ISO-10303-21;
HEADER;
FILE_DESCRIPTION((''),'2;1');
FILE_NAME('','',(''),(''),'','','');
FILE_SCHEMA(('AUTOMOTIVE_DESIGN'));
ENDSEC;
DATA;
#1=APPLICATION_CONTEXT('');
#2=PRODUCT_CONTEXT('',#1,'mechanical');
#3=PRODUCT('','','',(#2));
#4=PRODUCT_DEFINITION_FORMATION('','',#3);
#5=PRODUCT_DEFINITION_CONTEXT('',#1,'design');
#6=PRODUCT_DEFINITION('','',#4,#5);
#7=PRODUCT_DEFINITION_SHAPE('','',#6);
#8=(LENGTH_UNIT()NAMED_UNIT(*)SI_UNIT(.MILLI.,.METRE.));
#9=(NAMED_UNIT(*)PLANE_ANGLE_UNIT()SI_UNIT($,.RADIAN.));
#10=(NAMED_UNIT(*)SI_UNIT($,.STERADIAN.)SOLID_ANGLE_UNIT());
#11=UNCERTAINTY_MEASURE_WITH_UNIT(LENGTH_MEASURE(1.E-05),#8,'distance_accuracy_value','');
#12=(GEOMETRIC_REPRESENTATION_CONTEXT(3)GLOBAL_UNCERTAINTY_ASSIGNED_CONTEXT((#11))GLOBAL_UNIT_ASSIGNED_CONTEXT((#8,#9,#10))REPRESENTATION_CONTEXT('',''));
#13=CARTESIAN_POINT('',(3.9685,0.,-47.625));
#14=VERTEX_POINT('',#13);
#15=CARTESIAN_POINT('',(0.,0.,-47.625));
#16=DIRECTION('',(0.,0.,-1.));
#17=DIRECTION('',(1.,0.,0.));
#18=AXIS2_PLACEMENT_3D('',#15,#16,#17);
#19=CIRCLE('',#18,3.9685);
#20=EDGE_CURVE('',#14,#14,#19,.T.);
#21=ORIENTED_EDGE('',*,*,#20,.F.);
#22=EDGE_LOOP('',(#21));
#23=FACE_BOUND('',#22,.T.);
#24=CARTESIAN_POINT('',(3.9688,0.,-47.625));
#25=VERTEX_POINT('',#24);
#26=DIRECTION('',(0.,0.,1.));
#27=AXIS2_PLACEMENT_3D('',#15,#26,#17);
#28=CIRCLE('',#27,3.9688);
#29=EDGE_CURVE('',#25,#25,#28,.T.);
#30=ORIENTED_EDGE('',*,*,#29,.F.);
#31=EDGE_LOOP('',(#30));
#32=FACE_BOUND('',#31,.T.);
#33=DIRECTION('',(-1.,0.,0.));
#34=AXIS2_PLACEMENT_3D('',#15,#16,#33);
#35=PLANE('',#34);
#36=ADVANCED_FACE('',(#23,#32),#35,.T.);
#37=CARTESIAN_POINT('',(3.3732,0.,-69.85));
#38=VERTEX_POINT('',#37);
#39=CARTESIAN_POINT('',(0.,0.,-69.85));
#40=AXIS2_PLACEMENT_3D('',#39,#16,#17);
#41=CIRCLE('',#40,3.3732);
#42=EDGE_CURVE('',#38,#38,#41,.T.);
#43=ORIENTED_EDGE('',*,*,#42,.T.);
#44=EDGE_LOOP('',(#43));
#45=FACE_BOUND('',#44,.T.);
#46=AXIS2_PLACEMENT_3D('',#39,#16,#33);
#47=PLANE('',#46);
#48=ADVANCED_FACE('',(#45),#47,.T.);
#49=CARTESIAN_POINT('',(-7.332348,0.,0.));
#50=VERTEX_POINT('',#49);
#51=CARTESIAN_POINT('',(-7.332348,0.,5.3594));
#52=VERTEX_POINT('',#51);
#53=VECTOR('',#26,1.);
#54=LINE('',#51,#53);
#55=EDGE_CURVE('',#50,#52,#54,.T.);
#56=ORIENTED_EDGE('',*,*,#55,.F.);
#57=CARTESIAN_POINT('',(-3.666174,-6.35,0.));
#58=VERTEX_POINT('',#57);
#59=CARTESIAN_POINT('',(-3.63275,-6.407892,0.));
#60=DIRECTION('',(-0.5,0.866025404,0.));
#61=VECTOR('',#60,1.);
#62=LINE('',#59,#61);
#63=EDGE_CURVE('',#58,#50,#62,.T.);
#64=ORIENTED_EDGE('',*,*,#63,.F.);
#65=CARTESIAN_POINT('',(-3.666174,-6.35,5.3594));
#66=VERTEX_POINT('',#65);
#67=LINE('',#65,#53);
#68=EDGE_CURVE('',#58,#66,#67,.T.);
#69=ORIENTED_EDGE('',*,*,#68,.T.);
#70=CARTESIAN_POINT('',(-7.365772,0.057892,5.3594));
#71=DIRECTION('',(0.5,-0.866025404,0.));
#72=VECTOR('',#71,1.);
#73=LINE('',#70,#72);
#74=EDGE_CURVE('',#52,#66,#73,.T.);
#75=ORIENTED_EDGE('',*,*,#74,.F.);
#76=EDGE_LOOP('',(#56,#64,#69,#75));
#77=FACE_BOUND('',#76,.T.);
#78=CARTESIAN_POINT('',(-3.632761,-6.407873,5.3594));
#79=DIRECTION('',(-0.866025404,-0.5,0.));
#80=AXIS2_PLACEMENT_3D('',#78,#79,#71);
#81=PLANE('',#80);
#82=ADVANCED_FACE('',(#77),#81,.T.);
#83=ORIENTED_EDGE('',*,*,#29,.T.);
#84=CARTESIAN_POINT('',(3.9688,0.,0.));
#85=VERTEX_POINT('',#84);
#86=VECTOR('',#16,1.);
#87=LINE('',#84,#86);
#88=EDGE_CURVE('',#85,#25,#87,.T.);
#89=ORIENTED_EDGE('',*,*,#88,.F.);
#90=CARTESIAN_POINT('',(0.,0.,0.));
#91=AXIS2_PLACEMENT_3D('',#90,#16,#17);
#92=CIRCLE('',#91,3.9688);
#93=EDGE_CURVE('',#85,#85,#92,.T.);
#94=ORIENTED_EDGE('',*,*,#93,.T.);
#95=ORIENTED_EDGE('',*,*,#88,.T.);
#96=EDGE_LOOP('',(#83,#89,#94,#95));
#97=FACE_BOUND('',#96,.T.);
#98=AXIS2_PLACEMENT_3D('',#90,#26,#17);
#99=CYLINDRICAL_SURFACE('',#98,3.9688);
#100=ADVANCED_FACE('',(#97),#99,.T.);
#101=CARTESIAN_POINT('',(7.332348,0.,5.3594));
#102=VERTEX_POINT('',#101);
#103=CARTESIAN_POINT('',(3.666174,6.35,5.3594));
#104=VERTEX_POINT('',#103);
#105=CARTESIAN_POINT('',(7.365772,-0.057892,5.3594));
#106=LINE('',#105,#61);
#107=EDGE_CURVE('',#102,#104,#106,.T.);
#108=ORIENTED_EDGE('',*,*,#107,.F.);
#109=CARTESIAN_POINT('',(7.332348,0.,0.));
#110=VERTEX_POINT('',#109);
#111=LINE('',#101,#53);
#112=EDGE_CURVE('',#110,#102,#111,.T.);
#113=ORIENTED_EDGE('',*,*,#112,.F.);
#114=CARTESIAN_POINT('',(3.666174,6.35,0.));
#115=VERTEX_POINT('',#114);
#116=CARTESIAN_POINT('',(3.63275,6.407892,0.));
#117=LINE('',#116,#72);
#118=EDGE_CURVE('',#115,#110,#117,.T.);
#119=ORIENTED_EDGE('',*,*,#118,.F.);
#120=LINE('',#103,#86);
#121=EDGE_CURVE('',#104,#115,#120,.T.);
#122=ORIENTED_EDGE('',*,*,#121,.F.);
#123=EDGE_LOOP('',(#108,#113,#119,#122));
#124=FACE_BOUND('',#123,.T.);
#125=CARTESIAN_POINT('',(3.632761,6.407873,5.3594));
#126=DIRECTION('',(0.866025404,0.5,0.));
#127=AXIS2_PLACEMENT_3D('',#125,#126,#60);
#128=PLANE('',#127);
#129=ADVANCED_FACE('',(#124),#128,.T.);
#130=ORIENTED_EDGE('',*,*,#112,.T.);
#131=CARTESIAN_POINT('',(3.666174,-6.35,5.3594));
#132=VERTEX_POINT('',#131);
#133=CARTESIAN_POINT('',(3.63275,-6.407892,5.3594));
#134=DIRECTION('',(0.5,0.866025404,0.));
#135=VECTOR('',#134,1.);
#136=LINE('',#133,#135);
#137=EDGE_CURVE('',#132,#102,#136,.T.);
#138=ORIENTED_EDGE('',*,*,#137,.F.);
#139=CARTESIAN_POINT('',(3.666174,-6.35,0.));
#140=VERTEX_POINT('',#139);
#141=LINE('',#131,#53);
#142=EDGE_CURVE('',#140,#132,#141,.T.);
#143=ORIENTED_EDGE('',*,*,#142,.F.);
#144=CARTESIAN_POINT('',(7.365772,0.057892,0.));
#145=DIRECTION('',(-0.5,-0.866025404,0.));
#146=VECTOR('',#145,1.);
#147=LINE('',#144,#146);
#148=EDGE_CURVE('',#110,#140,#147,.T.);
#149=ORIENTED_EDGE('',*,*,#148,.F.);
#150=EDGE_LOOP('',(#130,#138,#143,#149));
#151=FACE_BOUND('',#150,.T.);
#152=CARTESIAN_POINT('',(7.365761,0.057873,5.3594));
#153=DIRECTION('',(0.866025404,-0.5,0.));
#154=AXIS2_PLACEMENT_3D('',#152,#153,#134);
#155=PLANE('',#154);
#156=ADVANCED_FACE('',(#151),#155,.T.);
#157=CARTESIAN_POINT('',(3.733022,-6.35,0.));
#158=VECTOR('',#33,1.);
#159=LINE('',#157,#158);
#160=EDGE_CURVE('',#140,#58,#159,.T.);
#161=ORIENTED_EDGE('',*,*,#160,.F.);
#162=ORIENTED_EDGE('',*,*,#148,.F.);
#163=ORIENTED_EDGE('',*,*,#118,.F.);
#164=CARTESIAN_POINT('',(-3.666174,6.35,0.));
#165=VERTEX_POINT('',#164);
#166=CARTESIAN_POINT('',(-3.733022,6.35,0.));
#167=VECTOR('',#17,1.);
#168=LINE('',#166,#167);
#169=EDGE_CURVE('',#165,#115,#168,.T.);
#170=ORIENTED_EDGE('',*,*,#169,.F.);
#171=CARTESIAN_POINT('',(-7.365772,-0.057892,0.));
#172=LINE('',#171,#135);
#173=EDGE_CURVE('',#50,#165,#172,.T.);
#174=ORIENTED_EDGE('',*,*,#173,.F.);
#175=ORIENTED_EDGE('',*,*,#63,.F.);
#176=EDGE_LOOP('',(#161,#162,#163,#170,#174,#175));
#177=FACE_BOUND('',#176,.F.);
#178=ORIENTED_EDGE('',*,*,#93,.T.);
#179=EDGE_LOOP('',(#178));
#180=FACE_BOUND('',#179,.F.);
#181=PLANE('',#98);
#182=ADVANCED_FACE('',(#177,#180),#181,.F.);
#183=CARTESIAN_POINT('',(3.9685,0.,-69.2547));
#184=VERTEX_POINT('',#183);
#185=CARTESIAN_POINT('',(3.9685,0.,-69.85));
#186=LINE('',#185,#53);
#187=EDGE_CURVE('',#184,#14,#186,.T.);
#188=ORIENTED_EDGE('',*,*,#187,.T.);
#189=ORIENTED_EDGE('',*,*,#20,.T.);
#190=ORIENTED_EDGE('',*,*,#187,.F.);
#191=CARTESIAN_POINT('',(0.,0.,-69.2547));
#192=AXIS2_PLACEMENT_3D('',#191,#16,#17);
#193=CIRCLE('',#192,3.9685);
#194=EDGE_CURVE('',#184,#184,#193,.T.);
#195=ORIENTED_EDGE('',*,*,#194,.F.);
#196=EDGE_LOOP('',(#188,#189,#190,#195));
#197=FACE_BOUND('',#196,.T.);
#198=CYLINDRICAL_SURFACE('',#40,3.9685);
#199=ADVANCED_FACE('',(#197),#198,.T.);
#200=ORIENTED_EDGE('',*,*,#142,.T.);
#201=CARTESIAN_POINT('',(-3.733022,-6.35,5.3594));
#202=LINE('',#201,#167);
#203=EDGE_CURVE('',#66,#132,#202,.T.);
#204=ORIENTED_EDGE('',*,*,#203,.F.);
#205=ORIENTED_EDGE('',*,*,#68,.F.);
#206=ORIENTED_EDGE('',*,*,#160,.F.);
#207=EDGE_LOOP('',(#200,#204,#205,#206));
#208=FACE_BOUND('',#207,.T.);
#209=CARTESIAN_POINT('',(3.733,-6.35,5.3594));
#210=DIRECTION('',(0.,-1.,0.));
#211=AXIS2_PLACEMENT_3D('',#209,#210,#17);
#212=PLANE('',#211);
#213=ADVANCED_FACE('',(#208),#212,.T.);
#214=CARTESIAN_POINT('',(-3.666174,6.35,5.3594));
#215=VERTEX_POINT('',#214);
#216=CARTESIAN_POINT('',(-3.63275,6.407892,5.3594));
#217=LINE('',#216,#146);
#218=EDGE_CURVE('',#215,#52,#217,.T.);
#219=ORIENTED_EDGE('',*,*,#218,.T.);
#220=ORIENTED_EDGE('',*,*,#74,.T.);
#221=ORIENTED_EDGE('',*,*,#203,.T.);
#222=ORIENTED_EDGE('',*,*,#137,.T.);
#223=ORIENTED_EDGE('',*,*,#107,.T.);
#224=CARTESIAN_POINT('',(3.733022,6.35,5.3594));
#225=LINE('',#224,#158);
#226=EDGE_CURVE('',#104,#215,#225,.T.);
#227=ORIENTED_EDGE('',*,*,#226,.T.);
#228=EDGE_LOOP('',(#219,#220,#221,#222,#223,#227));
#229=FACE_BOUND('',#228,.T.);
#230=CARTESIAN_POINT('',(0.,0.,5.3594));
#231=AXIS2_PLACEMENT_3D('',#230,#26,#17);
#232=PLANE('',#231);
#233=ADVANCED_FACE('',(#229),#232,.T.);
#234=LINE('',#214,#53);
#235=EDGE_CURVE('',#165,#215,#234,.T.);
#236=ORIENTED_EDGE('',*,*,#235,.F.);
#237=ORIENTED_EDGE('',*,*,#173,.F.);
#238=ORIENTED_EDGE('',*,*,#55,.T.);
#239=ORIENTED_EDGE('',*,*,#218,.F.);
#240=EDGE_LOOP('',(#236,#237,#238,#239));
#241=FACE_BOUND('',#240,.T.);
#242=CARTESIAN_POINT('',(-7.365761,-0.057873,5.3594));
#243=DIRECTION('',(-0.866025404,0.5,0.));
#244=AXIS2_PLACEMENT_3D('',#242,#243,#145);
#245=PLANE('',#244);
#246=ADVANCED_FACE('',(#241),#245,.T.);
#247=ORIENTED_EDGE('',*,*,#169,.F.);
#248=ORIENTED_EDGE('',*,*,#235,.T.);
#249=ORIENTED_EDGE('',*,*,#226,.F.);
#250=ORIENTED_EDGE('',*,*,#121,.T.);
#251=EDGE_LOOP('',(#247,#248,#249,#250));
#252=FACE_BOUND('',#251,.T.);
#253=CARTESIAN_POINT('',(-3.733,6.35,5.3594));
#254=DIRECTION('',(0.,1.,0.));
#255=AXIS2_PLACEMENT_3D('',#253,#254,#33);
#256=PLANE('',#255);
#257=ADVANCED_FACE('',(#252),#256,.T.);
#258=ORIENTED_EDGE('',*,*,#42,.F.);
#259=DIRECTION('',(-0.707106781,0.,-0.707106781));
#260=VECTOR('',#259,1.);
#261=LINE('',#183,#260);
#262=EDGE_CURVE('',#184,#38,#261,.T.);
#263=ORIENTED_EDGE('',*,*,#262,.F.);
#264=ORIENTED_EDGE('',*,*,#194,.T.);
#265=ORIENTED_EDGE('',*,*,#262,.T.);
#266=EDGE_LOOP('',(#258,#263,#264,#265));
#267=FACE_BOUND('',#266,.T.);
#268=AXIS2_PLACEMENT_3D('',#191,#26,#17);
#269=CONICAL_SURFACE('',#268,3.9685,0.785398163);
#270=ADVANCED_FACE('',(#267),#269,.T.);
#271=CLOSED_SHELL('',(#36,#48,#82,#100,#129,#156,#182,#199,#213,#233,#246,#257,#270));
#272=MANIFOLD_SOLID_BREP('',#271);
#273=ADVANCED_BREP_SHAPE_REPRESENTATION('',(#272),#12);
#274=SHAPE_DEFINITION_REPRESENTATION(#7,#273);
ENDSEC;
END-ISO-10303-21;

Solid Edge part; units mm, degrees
sketch "Sketch1" plane through (0, 0, 0) normal (0, 0, 1) x (1, 0, 0)
  circle A0 centre (0, 0) radius 7.366
  dimension "D1" = 14.732
extrude "Protrusion1" add sketch "Sketch1" along normal blind 5.3594
sketch "Sketch2" plane through (0, 0, 0) normal (0, 0, -1) x (1, 0, 0)
  circle A0 centre (0, 0) radius 3.9688
extrude "Protrusion2" add sketch "Sketch2" along normal blind 69.85
sketch "Sketch3" plane through (0, 0, -69.85) normal (0, 0, -1) x (1, 0, 0)
  circle A0 centre (0, 0) radius 3.9685
extrude "Cutout1" cut sketch "Sketch3" against normal blind 22.225 flip side to cut
chamfer "Chamfer_1" distance 0.5953 angle 45 1 edges at (-3.9685, 0, -69.85)
sketch "Sketch4" plane through (0, 0, 5.3594) normal (0, 0, 1) x (1, 0, 0)
  line L0 (-3.733, 6.35) -> (3.733, 6.35)
  dimension "D1" = 12.7
extrude "Cutout2" cut sketch "Sketch4" against normal up to next material side at (0, 6.4, 5.3594)
pattern_circular "Pattern1" count 6 over 360 about axis through (0, 0, 5.3594) along (0, 0, 1) of "Cutout2"
properties part number "24100072"
